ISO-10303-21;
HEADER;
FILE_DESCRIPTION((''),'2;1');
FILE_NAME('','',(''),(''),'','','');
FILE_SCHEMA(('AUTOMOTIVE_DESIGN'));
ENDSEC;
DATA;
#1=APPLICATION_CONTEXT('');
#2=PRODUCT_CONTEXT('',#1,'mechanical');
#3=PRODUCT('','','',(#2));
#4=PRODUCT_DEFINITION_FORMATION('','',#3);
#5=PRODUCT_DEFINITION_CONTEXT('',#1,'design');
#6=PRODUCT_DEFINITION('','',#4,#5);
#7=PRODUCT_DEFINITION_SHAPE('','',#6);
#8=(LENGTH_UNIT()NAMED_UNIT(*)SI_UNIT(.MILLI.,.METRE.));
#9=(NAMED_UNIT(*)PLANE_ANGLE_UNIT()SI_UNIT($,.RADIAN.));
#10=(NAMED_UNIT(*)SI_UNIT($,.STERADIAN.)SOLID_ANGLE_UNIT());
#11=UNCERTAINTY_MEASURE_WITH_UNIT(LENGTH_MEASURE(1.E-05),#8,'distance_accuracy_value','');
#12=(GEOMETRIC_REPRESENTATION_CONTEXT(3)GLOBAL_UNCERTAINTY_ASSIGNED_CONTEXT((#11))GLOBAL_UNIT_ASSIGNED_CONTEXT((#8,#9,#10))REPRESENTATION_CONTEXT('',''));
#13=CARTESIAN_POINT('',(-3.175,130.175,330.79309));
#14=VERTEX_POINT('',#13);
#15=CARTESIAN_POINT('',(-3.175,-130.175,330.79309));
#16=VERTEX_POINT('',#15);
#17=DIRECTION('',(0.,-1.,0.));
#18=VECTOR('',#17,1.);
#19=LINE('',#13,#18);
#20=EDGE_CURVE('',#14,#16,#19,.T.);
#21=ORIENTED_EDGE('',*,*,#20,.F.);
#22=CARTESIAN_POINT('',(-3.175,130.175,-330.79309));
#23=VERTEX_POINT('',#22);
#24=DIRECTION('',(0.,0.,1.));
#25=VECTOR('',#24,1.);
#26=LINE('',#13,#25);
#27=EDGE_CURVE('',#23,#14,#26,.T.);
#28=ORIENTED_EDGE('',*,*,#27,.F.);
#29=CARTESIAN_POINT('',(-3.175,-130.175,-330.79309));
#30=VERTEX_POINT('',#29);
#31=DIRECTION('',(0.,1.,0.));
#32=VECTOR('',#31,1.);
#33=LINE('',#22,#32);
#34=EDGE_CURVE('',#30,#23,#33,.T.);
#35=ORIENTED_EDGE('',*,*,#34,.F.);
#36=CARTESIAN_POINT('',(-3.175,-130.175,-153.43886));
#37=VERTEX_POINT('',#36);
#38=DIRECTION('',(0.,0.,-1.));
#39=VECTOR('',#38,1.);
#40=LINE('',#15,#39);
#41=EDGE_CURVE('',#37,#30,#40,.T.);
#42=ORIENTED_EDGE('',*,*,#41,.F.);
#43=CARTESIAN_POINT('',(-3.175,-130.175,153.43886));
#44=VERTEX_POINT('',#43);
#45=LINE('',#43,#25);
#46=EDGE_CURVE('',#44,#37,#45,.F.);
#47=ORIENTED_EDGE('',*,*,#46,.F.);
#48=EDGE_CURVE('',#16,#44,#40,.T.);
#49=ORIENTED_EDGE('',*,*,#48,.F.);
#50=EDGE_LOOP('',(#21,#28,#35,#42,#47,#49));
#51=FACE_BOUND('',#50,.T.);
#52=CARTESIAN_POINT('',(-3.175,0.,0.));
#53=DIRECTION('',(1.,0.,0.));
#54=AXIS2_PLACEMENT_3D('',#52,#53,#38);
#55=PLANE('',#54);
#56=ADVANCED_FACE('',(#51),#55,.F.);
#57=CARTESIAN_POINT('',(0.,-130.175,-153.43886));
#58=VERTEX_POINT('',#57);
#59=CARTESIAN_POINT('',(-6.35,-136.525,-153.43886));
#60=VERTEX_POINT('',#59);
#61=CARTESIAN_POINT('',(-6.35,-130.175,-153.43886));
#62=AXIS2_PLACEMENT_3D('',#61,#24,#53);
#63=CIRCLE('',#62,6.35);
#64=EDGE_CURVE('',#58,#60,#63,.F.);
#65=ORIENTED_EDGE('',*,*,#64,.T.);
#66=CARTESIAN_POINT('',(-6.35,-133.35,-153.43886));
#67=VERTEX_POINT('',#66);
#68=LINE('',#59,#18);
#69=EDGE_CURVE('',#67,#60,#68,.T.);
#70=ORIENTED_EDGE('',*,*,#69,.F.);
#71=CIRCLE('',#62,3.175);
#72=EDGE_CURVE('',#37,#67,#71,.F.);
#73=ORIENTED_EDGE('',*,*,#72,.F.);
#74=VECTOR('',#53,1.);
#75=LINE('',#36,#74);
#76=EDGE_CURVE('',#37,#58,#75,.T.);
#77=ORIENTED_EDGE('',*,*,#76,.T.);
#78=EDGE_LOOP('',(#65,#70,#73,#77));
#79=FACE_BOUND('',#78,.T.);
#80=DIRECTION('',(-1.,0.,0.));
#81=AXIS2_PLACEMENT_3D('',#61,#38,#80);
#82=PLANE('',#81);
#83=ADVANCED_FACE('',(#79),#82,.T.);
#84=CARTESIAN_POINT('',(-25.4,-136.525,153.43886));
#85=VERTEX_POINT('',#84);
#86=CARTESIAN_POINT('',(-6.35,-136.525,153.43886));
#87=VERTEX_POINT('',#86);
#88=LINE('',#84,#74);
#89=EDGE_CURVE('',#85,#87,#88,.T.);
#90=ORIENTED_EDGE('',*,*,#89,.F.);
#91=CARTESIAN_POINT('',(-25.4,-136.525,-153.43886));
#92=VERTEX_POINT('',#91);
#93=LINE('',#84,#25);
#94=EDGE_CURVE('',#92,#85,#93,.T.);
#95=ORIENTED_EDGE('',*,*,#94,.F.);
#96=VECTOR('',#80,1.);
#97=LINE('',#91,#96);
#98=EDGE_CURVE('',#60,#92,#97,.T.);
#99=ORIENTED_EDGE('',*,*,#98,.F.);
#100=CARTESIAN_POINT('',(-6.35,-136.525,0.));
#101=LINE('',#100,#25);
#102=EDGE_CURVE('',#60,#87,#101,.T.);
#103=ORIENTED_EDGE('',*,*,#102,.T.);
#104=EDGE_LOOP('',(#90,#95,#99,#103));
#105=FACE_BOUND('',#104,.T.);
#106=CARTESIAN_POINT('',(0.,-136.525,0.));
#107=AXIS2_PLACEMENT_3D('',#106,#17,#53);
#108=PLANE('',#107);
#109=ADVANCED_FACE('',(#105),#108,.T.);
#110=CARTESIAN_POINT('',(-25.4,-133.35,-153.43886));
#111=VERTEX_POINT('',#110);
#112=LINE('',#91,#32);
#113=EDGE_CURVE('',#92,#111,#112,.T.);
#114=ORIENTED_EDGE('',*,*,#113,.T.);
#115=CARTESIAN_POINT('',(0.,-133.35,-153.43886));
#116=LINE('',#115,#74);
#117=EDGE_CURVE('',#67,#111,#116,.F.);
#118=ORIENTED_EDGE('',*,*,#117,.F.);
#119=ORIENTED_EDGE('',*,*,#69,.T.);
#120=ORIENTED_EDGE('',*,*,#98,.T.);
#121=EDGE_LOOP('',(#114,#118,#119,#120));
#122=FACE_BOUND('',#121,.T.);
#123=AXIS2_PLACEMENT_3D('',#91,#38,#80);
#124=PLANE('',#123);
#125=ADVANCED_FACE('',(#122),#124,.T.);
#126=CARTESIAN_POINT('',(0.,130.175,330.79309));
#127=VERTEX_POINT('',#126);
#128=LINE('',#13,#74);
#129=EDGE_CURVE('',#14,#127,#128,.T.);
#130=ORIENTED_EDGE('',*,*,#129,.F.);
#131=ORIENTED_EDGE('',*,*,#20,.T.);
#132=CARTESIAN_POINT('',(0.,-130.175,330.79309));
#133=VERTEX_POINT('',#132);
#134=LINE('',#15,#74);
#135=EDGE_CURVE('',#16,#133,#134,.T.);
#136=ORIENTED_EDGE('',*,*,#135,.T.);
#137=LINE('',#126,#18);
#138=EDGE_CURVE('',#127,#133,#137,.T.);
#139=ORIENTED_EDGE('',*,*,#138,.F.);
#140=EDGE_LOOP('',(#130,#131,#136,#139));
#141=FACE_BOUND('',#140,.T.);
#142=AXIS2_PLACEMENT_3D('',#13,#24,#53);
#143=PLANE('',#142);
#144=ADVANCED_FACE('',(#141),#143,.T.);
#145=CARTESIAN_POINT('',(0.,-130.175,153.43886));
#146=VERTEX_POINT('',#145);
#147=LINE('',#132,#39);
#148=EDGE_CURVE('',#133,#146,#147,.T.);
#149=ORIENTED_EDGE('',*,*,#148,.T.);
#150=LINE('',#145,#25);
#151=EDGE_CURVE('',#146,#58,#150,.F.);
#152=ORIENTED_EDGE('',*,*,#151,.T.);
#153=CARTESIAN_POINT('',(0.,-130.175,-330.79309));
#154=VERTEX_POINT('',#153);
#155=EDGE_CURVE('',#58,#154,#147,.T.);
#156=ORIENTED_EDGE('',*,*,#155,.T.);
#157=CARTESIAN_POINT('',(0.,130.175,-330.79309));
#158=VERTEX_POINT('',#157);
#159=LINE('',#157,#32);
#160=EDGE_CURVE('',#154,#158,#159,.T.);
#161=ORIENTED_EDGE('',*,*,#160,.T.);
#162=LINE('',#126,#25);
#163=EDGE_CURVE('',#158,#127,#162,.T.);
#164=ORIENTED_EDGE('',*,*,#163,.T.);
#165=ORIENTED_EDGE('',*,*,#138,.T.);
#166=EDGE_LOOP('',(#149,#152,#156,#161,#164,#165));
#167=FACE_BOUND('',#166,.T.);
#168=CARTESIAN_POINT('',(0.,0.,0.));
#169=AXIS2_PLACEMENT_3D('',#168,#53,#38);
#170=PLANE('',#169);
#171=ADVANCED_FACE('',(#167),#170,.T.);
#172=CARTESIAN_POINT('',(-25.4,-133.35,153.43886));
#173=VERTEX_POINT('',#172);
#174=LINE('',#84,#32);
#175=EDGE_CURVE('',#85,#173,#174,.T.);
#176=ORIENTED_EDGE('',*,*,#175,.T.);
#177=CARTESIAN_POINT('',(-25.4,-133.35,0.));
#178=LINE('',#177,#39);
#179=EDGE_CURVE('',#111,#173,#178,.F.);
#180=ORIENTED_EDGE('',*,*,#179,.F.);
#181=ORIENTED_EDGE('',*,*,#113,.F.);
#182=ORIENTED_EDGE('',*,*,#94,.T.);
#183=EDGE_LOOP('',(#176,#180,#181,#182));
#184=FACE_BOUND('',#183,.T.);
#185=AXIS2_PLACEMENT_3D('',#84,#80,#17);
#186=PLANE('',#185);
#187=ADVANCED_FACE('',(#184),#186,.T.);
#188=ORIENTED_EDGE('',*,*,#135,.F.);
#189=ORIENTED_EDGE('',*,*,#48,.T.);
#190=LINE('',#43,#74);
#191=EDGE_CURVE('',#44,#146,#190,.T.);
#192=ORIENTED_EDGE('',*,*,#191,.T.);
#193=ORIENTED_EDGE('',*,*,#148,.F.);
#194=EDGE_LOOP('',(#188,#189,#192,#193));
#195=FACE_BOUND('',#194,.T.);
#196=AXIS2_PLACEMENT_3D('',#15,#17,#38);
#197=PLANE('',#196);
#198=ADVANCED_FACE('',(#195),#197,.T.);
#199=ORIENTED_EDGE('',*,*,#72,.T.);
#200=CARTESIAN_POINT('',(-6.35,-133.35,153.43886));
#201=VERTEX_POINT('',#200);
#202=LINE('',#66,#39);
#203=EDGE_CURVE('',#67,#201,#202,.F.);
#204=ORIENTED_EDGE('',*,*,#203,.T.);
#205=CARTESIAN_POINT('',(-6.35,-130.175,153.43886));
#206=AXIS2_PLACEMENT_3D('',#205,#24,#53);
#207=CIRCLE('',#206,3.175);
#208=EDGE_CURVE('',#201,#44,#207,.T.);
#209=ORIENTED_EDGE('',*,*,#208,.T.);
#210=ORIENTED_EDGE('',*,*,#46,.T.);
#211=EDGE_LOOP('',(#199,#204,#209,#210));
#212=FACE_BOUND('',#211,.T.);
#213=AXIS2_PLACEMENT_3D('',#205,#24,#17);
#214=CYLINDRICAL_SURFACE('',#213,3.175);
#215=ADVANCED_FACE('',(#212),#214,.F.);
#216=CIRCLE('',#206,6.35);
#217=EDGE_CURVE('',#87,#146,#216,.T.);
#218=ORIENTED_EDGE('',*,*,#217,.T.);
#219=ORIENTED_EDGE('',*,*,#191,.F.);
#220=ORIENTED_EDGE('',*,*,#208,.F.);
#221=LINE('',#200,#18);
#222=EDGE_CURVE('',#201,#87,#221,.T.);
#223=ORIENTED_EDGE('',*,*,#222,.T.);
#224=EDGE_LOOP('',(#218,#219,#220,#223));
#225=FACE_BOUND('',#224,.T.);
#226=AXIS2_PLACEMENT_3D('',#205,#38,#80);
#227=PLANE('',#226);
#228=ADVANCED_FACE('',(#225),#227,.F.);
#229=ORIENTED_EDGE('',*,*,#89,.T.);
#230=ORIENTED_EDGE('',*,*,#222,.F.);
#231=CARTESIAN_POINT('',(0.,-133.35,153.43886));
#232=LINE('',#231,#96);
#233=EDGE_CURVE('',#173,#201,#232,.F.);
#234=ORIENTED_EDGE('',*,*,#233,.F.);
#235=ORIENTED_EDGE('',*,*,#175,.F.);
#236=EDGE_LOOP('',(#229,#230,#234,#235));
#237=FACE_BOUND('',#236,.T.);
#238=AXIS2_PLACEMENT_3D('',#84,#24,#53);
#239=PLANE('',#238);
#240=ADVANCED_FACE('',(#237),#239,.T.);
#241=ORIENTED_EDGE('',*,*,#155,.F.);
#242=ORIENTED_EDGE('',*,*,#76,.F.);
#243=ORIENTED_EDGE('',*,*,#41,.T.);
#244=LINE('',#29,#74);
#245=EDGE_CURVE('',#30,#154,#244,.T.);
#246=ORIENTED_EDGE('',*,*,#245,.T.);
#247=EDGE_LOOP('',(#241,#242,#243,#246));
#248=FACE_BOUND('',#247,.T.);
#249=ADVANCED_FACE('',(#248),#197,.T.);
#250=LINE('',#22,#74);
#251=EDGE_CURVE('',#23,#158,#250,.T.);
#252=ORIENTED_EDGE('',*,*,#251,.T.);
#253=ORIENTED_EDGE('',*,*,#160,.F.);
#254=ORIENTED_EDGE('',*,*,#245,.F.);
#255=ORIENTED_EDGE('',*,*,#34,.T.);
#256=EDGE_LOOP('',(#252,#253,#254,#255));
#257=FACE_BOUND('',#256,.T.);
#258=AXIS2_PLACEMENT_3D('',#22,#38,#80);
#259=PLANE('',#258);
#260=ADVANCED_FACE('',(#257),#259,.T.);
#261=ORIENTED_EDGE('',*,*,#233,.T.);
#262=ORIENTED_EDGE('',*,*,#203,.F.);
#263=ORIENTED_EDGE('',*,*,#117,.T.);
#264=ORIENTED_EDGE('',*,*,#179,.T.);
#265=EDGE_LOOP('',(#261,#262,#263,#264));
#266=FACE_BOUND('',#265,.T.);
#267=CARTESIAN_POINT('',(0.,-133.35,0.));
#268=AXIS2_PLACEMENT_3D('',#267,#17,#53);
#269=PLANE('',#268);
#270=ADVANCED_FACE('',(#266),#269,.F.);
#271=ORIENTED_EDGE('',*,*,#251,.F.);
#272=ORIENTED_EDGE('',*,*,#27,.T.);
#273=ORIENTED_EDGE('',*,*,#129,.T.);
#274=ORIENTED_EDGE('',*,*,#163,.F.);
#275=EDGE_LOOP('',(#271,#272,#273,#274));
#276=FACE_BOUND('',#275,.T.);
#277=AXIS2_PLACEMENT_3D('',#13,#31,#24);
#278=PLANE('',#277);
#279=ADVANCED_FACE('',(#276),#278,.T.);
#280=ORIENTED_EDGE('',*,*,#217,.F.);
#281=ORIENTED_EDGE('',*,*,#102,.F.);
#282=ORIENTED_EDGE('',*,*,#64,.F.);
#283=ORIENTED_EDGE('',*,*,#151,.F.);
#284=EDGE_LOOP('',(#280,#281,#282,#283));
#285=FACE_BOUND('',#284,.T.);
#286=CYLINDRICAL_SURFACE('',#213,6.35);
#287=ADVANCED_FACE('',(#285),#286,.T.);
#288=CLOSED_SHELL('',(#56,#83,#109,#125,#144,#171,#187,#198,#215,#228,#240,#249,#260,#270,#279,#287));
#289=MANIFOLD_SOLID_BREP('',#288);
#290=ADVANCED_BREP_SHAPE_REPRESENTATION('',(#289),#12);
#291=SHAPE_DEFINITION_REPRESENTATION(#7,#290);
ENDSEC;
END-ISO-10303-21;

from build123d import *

# Parameters (mm, degrees)
SKETCH1_W          = 661.58618
SKETCH1_H          = 260.35
BASE_FLANGE1_DEPTH = 3.175
EDGE_FLANGE1_DEPTH = 306.87772


# Sheet-metal steps are written as plain solids
with BuildPart() as part:
    # Sketch1 → Base-Flange1 (new body)
    with BuildSketch(Plane(origin=(0, 0, 0), x_dir=(0, 0, -1), z_dir=(1, 0, 0))):
        Rectangle(SKETCH1_W, SKETCH1_H)
    extrude(amount=-BASE_FLANGE1_DEPTH)

    # Edge-Flange1 section (across the edge) → Edge-Flange1 (add)
    with BuildSketch(Plane(origin=(-3.175, -133.35, -153.43886), x_dir=(0, 1, 0), z_dir=(0, 0, 1))):
        with BuildLine():
            Line((-3.175, 3.175), (-3.175, 22.225))
            Line((-3.175, 22.225), (0, 22.225))
            Line((0, 22.225), (0, 3.175))
            ThreePointArc((0, 3.175), (0.92993597, 0.92993597), (3.175, 0))
            Line((3.175, 0), (3.175, -3.175))
            ThreePointArc((3.175, -3.175), (-1.315128061, -1.315128061), (-3.175, 3.175))
        make_face()
    extrude(amount=EDGE_FLANGE1_DEPTH)


solid = part.part
